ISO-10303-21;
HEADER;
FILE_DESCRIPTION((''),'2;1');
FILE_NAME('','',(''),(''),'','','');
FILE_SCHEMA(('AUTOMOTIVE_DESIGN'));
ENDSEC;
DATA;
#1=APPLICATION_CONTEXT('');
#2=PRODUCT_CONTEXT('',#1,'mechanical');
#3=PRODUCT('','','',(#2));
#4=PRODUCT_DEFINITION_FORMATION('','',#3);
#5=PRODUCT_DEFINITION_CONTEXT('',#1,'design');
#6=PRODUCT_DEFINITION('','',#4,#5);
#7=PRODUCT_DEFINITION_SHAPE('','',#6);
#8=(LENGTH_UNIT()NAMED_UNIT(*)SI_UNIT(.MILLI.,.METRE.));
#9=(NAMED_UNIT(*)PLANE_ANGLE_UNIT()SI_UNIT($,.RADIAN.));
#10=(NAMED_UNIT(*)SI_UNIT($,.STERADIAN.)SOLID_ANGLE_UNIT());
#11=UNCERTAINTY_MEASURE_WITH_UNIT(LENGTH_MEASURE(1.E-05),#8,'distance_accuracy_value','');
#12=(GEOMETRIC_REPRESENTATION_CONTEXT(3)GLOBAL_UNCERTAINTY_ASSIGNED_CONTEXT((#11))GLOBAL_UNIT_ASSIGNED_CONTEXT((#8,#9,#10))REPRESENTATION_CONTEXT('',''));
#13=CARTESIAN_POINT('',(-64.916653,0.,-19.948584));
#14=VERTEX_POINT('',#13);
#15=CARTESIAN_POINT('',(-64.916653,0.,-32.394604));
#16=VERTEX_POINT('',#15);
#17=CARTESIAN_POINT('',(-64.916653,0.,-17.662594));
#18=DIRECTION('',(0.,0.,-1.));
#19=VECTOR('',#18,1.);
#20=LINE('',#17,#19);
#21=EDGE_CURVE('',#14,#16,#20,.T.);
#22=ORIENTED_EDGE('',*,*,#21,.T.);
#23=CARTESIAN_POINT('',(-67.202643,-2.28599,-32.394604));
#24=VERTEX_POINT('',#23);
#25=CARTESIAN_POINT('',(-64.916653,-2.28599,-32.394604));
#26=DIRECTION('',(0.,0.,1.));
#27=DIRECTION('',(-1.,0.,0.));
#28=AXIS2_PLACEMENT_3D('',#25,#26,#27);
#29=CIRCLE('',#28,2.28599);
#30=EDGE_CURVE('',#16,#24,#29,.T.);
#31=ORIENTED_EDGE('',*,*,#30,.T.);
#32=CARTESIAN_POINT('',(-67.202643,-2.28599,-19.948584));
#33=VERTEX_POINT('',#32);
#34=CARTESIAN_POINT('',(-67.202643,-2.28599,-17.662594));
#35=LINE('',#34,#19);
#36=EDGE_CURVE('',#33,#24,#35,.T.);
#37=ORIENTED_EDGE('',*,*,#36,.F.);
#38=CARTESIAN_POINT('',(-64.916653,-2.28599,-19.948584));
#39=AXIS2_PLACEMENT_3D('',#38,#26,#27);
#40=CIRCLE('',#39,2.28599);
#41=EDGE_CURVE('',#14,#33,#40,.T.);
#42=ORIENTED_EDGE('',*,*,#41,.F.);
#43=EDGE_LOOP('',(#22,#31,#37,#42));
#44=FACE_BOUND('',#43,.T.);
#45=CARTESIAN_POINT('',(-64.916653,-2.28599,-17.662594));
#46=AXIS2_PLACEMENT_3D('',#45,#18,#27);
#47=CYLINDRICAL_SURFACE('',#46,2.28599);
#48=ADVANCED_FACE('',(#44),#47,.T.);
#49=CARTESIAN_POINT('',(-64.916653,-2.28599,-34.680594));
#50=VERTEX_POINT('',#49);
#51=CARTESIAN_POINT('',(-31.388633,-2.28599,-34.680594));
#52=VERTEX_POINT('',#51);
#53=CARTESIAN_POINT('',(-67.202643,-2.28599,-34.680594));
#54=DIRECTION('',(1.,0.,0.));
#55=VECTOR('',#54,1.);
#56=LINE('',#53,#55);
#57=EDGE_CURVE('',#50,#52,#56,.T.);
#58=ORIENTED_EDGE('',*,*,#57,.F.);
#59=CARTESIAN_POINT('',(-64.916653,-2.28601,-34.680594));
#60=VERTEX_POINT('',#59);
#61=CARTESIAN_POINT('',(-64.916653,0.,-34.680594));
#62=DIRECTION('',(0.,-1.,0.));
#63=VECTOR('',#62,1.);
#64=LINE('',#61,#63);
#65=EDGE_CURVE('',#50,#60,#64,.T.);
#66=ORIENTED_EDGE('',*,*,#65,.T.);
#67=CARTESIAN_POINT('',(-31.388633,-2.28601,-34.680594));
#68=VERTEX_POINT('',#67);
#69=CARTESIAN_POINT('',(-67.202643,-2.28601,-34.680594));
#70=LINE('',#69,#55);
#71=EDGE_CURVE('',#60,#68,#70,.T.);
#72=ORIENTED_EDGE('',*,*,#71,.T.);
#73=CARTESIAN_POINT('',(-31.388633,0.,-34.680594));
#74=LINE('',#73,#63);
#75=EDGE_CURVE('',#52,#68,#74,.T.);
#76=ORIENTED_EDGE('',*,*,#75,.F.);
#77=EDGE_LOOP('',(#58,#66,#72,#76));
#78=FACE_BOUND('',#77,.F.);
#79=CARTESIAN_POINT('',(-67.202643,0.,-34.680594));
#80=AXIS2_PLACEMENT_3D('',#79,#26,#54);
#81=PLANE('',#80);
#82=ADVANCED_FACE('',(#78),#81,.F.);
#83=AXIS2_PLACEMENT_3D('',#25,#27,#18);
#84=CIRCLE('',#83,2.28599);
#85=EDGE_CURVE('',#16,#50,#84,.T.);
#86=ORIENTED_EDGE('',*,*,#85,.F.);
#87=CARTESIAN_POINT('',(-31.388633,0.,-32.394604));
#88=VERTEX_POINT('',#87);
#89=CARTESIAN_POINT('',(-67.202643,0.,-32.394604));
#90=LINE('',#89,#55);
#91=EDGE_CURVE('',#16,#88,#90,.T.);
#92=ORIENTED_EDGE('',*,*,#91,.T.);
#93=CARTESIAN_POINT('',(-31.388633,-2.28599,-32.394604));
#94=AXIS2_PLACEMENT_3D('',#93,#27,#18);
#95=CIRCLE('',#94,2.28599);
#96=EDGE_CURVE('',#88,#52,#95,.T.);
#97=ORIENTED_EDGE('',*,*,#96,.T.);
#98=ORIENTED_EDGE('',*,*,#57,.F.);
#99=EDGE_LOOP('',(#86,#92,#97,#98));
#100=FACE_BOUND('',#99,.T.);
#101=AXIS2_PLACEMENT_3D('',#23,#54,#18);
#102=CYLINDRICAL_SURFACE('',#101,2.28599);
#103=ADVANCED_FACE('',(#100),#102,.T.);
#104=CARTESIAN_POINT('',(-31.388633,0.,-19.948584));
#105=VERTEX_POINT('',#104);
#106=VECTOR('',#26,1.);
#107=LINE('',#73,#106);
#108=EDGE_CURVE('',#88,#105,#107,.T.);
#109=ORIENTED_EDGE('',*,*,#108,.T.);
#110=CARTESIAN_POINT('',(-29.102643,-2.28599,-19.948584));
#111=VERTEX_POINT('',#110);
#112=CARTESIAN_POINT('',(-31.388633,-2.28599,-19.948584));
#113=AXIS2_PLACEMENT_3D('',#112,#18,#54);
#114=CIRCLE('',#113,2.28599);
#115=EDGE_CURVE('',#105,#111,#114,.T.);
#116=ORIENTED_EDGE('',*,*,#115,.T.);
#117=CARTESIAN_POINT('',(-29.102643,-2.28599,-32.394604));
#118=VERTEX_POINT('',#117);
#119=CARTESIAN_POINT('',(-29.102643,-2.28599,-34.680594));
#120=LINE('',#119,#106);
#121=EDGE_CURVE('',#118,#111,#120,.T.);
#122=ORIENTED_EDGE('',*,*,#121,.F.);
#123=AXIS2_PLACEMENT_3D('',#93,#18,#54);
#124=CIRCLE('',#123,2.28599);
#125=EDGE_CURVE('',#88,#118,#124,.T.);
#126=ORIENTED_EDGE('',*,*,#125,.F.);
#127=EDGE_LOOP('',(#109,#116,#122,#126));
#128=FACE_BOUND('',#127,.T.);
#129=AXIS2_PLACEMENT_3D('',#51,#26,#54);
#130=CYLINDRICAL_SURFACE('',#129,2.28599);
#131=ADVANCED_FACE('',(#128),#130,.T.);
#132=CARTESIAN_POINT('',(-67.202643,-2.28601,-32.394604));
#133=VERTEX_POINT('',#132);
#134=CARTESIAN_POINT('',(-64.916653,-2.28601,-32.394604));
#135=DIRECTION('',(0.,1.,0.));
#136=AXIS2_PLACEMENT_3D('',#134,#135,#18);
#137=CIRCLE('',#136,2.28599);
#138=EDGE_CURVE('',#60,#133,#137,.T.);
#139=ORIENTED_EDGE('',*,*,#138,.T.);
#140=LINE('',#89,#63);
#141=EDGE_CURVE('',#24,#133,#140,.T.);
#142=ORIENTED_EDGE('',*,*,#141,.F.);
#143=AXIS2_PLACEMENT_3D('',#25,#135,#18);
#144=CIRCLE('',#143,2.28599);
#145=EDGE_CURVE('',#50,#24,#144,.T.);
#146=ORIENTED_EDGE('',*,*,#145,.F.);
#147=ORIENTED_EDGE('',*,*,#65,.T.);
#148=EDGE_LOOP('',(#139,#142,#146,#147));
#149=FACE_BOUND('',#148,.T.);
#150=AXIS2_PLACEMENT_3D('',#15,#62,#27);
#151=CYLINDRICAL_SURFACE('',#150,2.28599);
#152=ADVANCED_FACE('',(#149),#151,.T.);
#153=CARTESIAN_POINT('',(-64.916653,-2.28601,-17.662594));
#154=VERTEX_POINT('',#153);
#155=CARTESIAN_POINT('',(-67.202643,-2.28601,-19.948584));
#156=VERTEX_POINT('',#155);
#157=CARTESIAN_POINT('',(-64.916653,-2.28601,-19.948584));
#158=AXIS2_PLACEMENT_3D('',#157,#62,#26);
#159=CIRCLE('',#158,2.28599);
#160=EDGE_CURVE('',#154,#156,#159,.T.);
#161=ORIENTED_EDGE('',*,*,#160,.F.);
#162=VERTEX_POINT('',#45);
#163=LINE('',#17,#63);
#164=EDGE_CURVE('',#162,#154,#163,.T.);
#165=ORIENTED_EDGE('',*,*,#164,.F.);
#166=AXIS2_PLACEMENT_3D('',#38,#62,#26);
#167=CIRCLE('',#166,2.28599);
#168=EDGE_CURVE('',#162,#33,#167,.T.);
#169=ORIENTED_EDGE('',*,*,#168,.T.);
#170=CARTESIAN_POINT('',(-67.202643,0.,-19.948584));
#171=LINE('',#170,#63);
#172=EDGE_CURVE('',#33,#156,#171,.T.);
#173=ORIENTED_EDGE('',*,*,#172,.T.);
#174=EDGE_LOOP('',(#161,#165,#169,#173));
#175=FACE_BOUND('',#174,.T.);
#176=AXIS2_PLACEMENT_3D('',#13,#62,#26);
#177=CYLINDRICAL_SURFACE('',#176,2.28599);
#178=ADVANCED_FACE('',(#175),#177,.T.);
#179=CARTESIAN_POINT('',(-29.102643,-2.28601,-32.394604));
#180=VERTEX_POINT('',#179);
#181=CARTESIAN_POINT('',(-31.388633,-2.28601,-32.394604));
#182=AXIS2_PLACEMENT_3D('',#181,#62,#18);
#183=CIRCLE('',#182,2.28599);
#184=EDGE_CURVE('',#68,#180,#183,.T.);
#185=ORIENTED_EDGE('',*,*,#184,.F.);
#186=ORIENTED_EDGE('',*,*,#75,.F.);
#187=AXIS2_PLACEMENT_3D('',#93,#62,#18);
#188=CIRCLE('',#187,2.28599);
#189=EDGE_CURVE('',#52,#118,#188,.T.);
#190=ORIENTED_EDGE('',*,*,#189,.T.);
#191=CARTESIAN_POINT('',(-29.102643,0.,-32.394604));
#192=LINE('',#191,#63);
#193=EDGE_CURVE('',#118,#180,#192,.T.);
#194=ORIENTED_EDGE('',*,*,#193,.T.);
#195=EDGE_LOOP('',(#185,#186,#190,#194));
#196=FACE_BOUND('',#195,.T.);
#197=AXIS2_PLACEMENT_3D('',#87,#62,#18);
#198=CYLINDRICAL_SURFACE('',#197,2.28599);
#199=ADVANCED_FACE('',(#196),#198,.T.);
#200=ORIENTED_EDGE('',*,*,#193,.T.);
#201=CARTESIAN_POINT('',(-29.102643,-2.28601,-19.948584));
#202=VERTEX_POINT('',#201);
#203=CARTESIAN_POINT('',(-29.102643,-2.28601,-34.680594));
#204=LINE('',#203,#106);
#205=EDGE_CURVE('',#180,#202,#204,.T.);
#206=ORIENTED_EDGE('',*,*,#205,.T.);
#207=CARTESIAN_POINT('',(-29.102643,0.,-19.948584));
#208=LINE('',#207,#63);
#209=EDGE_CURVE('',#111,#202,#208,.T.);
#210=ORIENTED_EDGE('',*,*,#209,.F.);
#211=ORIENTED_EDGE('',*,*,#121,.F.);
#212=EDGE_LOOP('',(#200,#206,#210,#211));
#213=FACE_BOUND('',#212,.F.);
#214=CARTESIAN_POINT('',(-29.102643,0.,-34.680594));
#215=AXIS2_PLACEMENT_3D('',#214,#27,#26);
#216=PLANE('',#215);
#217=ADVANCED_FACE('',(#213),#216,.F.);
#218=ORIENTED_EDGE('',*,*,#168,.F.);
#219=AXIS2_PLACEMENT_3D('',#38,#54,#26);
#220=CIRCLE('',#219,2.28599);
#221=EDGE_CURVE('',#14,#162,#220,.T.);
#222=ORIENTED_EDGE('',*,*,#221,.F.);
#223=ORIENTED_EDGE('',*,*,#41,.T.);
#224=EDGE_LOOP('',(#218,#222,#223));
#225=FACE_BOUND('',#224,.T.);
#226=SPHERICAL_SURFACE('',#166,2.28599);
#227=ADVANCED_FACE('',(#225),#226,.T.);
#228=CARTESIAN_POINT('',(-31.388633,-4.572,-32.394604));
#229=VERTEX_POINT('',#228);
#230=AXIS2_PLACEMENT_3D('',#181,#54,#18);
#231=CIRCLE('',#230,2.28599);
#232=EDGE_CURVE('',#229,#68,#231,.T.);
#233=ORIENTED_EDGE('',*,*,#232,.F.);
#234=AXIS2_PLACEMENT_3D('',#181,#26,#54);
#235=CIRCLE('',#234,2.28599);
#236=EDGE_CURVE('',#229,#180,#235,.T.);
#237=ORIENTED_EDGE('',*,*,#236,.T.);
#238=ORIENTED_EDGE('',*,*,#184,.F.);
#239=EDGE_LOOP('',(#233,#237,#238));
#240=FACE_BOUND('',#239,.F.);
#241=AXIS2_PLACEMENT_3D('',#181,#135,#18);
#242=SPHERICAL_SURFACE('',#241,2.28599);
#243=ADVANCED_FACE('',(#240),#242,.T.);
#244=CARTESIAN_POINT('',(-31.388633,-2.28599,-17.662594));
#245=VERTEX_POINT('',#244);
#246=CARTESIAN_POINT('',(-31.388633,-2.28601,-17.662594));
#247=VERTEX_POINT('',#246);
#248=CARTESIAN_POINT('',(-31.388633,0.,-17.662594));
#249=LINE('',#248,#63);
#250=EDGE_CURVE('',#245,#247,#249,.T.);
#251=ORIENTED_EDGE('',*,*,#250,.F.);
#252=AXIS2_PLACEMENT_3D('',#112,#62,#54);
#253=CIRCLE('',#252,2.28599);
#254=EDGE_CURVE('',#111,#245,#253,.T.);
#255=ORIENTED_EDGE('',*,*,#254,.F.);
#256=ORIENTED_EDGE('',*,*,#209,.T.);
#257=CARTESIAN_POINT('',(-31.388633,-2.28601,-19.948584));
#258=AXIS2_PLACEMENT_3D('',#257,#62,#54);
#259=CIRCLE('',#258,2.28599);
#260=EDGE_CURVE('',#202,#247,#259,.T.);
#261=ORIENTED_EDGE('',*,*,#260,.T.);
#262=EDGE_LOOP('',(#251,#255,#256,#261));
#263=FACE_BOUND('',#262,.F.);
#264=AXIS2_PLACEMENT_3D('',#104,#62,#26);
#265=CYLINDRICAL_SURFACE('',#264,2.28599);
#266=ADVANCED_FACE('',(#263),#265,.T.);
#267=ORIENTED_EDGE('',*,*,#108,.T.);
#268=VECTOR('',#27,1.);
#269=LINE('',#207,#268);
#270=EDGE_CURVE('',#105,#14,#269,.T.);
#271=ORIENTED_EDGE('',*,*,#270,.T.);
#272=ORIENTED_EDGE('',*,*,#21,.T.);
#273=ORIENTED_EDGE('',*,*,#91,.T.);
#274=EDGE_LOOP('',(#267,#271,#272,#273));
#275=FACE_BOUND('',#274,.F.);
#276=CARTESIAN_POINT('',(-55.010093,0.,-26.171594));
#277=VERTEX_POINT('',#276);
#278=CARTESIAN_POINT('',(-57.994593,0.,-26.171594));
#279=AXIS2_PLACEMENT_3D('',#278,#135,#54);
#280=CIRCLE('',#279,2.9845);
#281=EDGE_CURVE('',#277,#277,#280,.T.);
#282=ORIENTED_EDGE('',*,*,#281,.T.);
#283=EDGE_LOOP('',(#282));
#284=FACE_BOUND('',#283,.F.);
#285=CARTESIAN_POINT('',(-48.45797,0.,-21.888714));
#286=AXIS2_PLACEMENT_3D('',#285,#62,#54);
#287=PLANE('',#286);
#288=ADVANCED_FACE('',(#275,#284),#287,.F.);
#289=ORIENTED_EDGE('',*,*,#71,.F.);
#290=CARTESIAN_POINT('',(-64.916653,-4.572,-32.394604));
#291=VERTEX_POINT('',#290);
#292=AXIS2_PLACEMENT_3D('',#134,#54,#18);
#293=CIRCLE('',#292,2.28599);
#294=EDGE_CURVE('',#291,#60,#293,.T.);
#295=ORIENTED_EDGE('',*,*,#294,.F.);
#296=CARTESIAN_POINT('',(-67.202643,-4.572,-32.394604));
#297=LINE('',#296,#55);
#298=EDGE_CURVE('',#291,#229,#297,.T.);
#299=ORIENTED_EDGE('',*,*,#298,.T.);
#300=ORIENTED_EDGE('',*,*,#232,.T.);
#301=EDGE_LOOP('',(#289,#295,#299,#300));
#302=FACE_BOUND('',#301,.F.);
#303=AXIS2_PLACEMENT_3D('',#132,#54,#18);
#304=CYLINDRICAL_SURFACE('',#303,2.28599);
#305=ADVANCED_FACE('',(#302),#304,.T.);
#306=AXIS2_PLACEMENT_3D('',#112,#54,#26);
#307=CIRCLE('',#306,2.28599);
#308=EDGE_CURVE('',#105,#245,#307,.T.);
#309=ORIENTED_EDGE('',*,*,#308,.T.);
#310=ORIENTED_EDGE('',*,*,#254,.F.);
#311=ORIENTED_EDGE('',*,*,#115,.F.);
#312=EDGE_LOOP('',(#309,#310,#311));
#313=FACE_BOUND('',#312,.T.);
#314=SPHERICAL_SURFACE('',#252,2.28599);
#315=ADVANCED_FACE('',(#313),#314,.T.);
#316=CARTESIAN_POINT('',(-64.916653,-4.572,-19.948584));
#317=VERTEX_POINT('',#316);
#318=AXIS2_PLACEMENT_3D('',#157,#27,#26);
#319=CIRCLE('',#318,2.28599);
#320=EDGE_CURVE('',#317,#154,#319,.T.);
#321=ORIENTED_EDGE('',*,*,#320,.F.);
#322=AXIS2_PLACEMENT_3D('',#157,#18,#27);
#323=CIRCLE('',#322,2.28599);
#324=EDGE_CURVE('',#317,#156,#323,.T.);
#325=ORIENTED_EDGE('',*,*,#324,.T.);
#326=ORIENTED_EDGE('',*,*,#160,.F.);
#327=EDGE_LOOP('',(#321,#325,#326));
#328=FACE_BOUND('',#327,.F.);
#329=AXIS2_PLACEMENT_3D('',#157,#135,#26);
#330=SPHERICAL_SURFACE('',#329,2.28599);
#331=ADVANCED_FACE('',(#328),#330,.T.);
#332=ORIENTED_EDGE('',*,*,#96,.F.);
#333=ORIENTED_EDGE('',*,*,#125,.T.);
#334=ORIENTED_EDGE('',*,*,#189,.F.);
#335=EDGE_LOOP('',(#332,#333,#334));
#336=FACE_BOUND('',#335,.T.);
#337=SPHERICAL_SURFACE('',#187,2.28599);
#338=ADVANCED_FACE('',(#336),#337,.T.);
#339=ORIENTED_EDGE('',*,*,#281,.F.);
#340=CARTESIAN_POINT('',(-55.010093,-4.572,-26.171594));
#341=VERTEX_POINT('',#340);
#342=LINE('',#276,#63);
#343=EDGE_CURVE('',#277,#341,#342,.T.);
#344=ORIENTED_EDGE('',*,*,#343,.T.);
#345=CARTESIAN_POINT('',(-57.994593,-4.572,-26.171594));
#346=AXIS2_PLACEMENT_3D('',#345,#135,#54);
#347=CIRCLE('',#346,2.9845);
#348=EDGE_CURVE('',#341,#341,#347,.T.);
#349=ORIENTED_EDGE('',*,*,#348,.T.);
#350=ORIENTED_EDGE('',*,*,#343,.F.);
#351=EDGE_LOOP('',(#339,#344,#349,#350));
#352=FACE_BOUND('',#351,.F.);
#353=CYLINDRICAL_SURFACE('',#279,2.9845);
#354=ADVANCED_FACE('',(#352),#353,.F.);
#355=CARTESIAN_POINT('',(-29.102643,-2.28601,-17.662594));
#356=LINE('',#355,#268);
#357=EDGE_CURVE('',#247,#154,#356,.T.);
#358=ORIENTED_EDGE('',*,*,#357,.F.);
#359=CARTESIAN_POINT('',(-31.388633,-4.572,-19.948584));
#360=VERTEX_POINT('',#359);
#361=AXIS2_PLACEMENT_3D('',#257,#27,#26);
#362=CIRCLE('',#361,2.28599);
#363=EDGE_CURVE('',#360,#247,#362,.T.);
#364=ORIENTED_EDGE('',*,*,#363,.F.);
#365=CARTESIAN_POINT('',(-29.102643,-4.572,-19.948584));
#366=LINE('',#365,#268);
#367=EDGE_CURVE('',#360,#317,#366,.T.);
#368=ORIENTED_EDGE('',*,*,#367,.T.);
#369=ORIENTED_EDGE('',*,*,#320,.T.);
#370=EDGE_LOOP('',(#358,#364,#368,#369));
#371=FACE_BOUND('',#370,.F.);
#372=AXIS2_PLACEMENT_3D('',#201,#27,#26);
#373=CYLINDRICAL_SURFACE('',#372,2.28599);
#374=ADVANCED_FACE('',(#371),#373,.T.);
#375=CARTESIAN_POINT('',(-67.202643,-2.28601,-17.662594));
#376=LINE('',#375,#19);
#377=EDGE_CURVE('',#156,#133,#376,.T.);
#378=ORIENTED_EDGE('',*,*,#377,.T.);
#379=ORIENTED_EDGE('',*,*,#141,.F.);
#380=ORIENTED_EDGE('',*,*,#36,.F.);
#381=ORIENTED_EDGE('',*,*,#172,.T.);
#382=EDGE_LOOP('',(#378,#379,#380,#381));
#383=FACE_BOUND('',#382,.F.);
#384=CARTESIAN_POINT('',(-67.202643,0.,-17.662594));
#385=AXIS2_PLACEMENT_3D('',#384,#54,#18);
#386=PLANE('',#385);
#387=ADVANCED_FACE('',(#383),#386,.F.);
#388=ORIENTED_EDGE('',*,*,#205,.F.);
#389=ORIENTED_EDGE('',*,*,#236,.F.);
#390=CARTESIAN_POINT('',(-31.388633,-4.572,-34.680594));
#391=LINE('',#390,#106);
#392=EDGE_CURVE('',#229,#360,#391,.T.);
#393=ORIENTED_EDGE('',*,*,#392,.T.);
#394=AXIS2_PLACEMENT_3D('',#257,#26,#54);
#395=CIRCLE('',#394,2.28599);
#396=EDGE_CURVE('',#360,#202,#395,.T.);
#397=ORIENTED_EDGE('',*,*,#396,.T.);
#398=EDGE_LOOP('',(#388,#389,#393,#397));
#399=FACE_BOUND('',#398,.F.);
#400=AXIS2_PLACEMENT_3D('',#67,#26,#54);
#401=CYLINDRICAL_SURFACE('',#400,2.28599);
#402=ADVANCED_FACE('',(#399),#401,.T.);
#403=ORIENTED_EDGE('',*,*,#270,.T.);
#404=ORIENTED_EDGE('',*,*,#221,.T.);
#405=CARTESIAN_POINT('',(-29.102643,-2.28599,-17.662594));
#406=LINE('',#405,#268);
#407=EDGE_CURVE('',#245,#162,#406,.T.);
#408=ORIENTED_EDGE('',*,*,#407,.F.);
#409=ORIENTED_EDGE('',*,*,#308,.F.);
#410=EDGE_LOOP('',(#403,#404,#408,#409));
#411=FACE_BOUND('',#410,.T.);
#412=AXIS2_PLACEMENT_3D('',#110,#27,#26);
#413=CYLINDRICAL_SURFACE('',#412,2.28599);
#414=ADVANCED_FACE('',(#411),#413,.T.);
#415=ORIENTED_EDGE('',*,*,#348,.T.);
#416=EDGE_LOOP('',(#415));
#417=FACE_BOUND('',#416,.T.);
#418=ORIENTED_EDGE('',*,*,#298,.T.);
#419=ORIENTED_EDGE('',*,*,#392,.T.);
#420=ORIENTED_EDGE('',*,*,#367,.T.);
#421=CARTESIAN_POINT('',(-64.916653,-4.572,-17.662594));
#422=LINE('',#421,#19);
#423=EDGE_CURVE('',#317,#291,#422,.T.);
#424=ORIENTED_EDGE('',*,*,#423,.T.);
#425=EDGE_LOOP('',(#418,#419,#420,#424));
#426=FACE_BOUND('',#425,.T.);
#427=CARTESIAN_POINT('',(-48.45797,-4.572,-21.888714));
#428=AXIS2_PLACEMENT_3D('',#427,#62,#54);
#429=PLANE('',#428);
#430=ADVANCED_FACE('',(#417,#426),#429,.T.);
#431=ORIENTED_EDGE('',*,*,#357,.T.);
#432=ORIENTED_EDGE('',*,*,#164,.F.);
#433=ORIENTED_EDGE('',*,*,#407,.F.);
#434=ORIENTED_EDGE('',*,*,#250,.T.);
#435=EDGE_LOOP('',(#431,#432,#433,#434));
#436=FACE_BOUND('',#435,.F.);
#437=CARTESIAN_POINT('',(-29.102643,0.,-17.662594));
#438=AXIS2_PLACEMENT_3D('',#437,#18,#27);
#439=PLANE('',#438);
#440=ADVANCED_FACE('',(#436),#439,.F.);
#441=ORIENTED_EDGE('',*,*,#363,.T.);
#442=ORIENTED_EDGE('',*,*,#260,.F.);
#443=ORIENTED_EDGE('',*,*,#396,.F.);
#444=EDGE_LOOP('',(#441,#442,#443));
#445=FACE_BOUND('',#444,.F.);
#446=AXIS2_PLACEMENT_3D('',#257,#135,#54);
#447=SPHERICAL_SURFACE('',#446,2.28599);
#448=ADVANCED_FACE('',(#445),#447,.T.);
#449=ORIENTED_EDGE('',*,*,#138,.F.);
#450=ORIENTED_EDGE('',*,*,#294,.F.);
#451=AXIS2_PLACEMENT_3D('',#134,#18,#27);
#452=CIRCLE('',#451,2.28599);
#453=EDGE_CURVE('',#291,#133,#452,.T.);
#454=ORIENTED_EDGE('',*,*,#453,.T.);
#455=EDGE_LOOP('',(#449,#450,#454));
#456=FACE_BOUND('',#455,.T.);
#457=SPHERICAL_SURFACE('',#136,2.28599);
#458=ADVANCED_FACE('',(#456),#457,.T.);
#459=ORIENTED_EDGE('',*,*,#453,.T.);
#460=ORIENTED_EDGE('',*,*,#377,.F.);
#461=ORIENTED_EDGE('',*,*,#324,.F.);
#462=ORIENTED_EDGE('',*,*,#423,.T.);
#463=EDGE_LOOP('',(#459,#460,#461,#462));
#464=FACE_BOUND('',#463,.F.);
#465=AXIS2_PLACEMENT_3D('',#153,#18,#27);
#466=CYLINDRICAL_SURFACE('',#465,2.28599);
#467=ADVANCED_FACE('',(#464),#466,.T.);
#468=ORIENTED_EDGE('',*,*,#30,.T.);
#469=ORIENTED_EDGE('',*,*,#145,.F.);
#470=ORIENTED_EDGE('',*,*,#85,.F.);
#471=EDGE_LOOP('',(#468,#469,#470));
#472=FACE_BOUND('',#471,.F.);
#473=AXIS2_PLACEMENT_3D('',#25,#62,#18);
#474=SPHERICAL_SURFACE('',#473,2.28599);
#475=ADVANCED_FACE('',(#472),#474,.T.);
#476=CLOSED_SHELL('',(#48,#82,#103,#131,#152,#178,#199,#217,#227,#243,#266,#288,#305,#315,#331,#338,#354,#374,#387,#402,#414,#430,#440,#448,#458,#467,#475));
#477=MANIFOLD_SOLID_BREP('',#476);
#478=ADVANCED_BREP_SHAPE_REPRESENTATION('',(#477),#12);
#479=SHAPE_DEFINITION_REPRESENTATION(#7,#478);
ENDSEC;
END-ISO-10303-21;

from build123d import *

# Parameters (mm, degrees)
F1_DEPTH = 4.572
F2_R     = 2.28599


# Not quite as in the source:
# - a fillet or chamfer is up to 0.001 mm smaller than in the source, because OpenCascade refuses the exact size


with BuildPart() as f1:
    # F0 (on Front) → F1 (new body)
    with BuildSketch(Plane.XZ):
        with BuildLine():
            Line((-29.10264256, -17.6625937588), (-67.20264256, -17.6625937588))
            Line((-67.20264256, -17.6625937588), (-67.20264256, -26.1715937588))
            Line((-67.20264256, -26.1715937588), (-60.9790929348, -26.1715937588))
            ThreePointArc((-60.9790929348, -26.1715937588), (-57.9945929348, -23.1870937588), (-55.0100929348, -26.1715937588))
            Line((-55.0100929348, -26.1715937588), (-29.10264256, -26.1715937588))
            Line((-29.10264256, -26.1715937588), (-29.10264256, -17.6625937588))
        make_face()
        with BuildLine():
            Line((-60.9790929348, -26.1715937588), (-67.20264256, -26.1715937588))
            Line((-67.20264256, -26.1715937588), (-67.20264256, -34.6805937588))
            Line((-67.20264256, -34.6805937588), (-29.10264256, -34.6805937588))
            Line((-29.10264256, -34.6805937588), (-29.10264256, -26.1715937588))
            Line((-29.10264256, -26.1715937588), (-55.0100929348, -26.1715937588))
            ThreePointArc((-55.0100929348, -26.1715937588), (-57.9945929348, -29.1560937588), (-60.9790929348, -26.1715937588))
        make_face()
    extrude(amount=F1_DEPTH)

    # F2 (radius 2.286 in the source; OpenCascade refuses exactly that, so slightly less here)
    f2_edges = [f1.edges().sort_by_distance(p)[0] for p in [
        (-67.202643, -2.286, -17.662594),
        (-29.102643, -2.286, -17.662594),
        (-29.102643, -2.286, -34.680594),
        (-67.202643, -2.286, -34.680594),
        (-48.152643, -4.572, -34.680594),
        (-48.152643, 0, -34.680594),
        (-29.102643, 0, -26.171594),
        (-29.102643, -4.572, -26.171594),
        (-48.152643, -4.572, -17.662594),
        (-48.152643, 0, -17.662594),
        (-67.202643, 0, -26.171594),
        (-67.202643, -4.572, -26.171594),
    ]]
    fillet(f2_edges, radius=F2_R)


solid = f1.part
